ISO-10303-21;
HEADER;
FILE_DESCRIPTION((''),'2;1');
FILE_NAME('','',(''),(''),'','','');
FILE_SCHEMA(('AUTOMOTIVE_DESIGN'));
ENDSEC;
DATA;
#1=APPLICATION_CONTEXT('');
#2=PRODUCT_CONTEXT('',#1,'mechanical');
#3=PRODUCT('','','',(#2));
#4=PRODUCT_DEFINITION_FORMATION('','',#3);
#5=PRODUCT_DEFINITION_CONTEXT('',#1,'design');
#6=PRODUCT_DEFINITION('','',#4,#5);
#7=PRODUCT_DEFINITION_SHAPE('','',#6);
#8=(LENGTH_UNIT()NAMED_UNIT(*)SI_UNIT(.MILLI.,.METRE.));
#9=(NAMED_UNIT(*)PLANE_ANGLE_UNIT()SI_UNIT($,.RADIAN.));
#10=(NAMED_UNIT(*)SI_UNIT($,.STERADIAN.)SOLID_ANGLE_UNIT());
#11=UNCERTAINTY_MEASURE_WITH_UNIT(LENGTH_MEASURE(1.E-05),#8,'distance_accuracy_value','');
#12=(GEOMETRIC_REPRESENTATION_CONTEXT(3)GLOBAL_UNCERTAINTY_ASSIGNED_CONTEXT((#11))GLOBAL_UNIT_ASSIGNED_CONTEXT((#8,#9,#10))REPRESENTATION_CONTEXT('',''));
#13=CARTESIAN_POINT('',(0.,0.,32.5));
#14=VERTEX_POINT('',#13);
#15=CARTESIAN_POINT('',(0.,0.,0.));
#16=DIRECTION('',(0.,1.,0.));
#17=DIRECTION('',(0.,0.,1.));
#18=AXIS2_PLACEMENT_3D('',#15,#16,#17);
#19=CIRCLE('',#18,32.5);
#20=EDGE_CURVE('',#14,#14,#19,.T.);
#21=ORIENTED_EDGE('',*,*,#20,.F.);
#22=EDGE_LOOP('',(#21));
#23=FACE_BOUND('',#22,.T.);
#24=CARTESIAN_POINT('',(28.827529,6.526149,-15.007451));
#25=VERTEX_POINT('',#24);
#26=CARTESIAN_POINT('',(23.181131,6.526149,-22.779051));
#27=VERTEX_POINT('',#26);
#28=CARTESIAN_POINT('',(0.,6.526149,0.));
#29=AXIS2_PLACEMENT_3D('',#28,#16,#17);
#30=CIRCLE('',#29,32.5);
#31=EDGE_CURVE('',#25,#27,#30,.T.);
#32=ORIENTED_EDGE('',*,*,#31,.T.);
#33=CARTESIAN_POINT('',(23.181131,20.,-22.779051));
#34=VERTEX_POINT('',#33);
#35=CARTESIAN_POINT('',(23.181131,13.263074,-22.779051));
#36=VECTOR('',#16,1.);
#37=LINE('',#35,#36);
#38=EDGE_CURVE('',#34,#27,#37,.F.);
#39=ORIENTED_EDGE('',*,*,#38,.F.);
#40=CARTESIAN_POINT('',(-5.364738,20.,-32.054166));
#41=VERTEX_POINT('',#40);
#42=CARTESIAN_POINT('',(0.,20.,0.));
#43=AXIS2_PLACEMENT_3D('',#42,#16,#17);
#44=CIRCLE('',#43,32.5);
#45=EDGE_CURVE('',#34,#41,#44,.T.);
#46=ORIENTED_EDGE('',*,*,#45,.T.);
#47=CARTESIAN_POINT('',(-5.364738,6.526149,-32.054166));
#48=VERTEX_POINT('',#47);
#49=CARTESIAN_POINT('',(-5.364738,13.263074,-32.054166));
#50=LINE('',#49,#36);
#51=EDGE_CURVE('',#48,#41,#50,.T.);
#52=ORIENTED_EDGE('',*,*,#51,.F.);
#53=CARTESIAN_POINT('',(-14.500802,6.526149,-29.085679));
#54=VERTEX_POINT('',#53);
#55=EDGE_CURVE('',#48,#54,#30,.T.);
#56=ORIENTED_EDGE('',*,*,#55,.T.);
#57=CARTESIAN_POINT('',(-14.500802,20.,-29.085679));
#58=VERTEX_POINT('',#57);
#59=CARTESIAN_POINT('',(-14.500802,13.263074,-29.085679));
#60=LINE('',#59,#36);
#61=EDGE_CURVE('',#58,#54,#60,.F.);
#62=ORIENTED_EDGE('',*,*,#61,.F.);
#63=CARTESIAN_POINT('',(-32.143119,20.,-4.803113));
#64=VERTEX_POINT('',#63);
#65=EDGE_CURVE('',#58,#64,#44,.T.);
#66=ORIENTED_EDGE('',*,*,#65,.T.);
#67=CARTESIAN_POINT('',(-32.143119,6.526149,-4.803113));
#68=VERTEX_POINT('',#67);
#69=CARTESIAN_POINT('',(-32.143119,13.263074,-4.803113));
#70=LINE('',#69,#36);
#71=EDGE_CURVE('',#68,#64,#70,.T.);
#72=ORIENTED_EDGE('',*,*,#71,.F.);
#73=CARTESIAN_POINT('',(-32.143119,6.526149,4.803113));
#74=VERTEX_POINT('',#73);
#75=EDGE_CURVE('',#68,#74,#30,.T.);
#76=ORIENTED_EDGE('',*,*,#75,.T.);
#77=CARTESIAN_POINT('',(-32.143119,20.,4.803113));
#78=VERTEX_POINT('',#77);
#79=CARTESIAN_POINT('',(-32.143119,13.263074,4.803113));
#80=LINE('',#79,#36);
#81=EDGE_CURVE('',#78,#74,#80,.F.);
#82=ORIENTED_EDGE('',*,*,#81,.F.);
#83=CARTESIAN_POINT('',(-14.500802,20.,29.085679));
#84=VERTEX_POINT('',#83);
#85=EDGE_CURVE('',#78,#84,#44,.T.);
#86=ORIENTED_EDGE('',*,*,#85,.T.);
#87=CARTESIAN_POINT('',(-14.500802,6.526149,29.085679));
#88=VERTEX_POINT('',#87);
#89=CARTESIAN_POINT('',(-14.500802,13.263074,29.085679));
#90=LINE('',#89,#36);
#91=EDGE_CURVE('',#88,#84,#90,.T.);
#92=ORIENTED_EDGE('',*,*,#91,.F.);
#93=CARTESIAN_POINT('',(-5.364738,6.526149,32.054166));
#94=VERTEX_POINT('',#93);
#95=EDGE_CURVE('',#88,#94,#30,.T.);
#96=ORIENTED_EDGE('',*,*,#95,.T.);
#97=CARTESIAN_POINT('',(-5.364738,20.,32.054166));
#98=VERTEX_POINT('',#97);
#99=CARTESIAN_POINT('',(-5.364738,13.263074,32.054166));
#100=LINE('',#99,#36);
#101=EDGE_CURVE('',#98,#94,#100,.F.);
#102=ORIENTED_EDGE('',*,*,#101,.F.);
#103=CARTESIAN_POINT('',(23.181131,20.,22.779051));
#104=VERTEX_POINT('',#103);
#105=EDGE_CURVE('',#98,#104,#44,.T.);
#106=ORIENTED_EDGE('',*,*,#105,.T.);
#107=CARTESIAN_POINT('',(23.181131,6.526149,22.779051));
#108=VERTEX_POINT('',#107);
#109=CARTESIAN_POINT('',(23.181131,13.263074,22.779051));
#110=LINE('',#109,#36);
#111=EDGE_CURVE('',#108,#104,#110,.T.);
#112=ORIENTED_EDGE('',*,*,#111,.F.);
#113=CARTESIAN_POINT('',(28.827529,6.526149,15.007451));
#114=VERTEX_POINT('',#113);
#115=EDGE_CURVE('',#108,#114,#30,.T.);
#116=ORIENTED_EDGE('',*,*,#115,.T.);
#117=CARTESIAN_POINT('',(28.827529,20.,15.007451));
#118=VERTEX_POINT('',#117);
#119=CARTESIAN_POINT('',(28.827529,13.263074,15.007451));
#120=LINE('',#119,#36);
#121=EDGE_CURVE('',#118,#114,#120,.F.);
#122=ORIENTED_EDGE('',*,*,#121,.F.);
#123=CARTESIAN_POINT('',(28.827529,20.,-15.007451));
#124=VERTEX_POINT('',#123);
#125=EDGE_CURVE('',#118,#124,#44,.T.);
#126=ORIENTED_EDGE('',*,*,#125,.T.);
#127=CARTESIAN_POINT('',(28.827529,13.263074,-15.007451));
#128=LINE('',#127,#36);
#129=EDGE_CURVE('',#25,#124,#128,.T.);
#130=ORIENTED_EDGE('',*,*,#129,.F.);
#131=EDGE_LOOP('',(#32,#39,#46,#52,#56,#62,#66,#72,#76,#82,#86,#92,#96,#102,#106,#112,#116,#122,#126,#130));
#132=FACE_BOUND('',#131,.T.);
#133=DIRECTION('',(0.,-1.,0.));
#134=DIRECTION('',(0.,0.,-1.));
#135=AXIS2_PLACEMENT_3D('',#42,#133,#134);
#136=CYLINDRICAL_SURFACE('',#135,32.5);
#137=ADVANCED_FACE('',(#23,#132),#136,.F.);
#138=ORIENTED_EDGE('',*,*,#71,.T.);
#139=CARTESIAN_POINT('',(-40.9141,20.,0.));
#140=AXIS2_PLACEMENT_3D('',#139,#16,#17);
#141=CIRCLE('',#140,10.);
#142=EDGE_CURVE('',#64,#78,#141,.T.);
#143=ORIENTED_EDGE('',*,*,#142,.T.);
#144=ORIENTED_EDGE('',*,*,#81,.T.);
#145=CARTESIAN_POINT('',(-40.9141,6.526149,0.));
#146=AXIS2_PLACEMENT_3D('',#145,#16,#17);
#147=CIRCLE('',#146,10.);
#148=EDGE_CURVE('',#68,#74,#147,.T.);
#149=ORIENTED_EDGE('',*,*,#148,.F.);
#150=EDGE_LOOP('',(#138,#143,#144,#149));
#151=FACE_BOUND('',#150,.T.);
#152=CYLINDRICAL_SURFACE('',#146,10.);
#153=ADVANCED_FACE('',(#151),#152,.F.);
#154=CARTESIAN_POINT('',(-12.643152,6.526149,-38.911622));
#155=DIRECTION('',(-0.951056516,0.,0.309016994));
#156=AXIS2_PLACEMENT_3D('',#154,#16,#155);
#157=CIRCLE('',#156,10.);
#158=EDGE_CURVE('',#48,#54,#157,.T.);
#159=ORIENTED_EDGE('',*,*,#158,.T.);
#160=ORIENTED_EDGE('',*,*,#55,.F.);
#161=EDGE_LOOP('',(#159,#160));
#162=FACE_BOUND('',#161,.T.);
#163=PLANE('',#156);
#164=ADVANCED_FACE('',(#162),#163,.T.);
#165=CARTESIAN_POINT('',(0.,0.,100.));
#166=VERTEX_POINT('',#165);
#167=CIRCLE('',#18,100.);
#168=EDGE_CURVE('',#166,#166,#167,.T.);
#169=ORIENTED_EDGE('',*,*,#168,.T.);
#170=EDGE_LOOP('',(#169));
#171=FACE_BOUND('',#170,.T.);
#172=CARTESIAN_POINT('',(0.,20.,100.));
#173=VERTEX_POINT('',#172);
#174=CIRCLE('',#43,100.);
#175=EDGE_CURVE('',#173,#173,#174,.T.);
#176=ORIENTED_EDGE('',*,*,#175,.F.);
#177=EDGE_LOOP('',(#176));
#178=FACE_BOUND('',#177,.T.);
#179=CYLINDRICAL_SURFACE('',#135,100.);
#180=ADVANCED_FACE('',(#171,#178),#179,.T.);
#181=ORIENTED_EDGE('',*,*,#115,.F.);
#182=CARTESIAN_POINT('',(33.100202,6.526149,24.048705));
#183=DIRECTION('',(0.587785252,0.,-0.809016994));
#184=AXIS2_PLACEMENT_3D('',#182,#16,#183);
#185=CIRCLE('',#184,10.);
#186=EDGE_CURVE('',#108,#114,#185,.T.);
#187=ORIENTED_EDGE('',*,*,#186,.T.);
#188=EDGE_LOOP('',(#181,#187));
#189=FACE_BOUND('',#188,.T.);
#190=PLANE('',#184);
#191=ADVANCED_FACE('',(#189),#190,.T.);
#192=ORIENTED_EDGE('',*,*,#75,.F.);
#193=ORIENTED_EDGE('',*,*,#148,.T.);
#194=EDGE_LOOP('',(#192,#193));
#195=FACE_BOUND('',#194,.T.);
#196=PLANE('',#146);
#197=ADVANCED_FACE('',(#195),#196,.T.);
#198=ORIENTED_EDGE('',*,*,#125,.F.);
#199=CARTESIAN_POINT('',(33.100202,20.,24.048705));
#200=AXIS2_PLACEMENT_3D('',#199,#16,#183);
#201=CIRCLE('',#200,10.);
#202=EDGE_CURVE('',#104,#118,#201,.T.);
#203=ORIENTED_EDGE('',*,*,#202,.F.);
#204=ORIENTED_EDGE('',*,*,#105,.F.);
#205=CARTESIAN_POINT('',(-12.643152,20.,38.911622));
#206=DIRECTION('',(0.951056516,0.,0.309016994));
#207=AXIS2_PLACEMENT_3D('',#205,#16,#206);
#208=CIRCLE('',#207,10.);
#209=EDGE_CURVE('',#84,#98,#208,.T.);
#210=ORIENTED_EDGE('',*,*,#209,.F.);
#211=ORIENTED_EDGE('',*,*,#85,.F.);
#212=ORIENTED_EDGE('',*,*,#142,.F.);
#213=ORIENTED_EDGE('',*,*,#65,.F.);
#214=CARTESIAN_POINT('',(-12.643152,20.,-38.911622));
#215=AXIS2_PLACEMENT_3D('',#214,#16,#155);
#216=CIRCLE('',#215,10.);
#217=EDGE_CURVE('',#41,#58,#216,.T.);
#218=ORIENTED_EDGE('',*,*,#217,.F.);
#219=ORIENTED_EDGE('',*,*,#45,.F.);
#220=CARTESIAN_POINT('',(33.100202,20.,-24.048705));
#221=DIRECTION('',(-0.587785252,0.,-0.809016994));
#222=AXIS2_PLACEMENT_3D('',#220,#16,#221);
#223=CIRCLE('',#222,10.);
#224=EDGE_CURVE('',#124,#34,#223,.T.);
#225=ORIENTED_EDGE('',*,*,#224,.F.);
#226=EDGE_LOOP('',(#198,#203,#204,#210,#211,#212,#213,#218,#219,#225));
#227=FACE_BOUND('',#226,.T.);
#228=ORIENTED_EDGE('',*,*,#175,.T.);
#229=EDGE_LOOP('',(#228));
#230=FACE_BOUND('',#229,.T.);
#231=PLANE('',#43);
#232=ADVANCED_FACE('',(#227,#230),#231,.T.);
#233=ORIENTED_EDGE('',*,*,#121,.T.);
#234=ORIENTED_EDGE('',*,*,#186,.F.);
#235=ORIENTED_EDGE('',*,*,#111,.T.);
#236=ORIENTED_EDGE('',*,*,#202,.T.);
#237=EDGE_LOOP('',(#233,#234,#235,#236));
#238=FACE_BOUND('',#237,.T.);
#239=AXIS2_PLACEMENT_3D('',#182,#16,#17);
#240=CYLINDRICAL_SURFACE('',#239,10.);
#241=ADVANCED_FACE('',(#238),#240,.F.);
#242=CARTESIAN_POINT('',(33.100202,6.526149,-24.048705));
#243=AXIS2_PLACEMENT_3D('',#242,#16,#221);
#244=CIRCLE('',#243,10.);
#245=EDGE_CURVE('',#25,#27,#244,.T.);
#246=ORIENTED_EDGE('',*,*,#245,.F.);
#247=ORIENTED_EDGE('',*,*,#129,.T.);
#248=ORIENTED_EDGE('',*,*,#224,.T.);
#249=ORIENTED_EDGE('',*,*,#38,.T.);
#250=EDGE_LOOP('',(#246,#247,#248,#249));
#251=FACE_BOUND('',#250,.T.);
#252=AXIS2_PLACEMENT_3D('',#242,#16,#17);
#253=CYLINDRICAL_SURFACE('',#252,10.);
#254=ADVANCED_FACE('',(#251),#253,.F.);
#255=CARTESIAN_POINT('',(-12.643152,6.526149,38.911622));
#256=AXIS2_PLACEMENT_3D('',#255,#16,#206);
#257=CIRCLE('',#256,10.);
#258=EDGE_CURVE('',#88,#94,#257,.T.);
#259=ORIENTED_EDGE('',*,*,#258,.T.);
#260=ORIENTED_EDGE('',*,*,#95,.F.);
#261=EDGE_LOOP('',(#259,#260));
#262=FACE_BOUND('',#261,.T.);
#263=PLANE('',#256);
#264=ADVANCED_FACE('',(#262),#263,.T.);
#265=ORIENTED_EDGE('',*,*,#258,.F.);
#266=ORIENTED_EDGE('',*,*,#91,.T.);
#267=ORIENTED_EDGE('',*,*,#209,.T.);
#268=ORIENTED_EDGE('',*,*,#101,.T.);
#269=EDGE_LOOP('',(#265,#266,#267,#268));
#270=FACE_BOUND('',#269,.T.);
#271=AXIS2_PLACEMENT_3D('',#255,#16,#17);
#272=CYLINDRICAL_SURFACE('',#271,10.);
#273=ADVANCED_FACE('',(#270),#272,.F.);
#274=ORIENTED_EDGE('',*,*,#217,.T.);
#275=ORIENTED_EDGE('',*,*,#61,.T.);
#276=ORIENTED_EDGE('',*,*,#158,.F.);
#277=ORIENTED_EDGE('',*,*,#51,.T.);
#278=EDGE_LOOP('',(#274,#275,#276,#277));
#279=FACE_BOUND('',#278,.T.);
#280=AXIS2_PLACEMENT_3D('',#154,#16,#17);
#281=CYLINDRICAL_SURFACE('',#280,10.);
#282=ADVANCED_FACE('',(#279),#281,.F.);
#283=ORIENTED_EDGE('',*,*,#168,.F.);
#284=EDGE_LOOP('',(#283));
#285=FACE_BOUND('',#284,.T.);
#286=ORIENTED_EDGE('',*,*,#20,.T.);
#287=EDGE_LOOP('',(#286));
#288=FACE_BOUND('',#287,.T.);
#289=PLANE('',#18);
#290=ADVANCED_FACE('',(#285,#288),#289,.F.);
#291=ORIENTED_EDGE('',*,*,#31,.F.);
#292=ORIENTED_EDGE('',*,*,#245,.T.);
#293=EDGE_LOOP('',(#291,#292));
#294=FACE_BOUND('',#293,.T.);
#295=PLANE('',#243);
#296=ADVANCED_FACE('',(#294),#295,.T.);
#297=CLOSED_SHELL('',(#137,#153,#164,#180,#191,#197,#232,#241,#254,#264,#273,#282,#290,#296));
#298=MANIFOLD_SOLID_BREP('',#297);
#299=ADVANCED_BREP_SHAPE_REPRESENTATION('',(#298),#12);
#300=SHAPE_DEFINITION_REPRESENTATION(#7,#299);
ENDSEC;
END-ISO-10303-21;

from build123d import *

# Parameters (mm, degrees)
SKETCH1_R           = 100
BOSS_EXTRUDE1_DEPTH = 20
SKETCH2_R           = 32.5
CUT_EXTRUDE1_DEPTH  = 143.828568571
SKETCH3_R           = 10
CUT_EXTRUDE2_DEPTH  = 13.47385129
CIRPATTERN1_COUNT   = 5


with BuildPart() as part:
    # Sketch1 → Boss-Extrude1 (new body)
    with BuildSketch(Plane(origin=(0, 0, 0), x_dir=(1, 0, 0), z_dir=(0, 1, 0))):
        Circle(SKETCH1_R)
    extrude(amount=BOSS_EXTRUDE1_DEPTH)

    # Sketch2 → Cut-Extrude1 (cut, through all)
    with BuildSketch(Plane(origin=(0, 0, 0), x_dir=(1, 0, 0), z_dir=(0, 1, 0))):
        Circle(SKETCH2_R)
    extrude(amount=CUT_EXTRUDE1_DEPTH, mode=Mode.SUBTRACT)

    # Sketch3 → Cut-Extrude2 (cut)
    with BuildSketch(Plane(origin=(0, 20, 0), x_dir=(1, 0, 0), z_dir=(0, 1, 0))):
        with Locations((-40.914100101, 0)):
            Circle(SKETCH3_R)
    cut_extrude2 = extrude(amount=-CUT_EXTRUDE2_DEPTH, mode=Mode.SUBTRACT)

    # CirPattern1: Cut-Extrude2 ×5 about axis
    cirpattern1_axis = Axis((0, 0, 0), (0, 1, 0))
    for i in range(1, CIRPATTERN1_COUNT):
        add(cut_extrude2.rotate(cirpattern1_axis, i * 360 / CIRPATTERN1_COUNT), mode=Mode.SUBTRACT)


solid = part.part
